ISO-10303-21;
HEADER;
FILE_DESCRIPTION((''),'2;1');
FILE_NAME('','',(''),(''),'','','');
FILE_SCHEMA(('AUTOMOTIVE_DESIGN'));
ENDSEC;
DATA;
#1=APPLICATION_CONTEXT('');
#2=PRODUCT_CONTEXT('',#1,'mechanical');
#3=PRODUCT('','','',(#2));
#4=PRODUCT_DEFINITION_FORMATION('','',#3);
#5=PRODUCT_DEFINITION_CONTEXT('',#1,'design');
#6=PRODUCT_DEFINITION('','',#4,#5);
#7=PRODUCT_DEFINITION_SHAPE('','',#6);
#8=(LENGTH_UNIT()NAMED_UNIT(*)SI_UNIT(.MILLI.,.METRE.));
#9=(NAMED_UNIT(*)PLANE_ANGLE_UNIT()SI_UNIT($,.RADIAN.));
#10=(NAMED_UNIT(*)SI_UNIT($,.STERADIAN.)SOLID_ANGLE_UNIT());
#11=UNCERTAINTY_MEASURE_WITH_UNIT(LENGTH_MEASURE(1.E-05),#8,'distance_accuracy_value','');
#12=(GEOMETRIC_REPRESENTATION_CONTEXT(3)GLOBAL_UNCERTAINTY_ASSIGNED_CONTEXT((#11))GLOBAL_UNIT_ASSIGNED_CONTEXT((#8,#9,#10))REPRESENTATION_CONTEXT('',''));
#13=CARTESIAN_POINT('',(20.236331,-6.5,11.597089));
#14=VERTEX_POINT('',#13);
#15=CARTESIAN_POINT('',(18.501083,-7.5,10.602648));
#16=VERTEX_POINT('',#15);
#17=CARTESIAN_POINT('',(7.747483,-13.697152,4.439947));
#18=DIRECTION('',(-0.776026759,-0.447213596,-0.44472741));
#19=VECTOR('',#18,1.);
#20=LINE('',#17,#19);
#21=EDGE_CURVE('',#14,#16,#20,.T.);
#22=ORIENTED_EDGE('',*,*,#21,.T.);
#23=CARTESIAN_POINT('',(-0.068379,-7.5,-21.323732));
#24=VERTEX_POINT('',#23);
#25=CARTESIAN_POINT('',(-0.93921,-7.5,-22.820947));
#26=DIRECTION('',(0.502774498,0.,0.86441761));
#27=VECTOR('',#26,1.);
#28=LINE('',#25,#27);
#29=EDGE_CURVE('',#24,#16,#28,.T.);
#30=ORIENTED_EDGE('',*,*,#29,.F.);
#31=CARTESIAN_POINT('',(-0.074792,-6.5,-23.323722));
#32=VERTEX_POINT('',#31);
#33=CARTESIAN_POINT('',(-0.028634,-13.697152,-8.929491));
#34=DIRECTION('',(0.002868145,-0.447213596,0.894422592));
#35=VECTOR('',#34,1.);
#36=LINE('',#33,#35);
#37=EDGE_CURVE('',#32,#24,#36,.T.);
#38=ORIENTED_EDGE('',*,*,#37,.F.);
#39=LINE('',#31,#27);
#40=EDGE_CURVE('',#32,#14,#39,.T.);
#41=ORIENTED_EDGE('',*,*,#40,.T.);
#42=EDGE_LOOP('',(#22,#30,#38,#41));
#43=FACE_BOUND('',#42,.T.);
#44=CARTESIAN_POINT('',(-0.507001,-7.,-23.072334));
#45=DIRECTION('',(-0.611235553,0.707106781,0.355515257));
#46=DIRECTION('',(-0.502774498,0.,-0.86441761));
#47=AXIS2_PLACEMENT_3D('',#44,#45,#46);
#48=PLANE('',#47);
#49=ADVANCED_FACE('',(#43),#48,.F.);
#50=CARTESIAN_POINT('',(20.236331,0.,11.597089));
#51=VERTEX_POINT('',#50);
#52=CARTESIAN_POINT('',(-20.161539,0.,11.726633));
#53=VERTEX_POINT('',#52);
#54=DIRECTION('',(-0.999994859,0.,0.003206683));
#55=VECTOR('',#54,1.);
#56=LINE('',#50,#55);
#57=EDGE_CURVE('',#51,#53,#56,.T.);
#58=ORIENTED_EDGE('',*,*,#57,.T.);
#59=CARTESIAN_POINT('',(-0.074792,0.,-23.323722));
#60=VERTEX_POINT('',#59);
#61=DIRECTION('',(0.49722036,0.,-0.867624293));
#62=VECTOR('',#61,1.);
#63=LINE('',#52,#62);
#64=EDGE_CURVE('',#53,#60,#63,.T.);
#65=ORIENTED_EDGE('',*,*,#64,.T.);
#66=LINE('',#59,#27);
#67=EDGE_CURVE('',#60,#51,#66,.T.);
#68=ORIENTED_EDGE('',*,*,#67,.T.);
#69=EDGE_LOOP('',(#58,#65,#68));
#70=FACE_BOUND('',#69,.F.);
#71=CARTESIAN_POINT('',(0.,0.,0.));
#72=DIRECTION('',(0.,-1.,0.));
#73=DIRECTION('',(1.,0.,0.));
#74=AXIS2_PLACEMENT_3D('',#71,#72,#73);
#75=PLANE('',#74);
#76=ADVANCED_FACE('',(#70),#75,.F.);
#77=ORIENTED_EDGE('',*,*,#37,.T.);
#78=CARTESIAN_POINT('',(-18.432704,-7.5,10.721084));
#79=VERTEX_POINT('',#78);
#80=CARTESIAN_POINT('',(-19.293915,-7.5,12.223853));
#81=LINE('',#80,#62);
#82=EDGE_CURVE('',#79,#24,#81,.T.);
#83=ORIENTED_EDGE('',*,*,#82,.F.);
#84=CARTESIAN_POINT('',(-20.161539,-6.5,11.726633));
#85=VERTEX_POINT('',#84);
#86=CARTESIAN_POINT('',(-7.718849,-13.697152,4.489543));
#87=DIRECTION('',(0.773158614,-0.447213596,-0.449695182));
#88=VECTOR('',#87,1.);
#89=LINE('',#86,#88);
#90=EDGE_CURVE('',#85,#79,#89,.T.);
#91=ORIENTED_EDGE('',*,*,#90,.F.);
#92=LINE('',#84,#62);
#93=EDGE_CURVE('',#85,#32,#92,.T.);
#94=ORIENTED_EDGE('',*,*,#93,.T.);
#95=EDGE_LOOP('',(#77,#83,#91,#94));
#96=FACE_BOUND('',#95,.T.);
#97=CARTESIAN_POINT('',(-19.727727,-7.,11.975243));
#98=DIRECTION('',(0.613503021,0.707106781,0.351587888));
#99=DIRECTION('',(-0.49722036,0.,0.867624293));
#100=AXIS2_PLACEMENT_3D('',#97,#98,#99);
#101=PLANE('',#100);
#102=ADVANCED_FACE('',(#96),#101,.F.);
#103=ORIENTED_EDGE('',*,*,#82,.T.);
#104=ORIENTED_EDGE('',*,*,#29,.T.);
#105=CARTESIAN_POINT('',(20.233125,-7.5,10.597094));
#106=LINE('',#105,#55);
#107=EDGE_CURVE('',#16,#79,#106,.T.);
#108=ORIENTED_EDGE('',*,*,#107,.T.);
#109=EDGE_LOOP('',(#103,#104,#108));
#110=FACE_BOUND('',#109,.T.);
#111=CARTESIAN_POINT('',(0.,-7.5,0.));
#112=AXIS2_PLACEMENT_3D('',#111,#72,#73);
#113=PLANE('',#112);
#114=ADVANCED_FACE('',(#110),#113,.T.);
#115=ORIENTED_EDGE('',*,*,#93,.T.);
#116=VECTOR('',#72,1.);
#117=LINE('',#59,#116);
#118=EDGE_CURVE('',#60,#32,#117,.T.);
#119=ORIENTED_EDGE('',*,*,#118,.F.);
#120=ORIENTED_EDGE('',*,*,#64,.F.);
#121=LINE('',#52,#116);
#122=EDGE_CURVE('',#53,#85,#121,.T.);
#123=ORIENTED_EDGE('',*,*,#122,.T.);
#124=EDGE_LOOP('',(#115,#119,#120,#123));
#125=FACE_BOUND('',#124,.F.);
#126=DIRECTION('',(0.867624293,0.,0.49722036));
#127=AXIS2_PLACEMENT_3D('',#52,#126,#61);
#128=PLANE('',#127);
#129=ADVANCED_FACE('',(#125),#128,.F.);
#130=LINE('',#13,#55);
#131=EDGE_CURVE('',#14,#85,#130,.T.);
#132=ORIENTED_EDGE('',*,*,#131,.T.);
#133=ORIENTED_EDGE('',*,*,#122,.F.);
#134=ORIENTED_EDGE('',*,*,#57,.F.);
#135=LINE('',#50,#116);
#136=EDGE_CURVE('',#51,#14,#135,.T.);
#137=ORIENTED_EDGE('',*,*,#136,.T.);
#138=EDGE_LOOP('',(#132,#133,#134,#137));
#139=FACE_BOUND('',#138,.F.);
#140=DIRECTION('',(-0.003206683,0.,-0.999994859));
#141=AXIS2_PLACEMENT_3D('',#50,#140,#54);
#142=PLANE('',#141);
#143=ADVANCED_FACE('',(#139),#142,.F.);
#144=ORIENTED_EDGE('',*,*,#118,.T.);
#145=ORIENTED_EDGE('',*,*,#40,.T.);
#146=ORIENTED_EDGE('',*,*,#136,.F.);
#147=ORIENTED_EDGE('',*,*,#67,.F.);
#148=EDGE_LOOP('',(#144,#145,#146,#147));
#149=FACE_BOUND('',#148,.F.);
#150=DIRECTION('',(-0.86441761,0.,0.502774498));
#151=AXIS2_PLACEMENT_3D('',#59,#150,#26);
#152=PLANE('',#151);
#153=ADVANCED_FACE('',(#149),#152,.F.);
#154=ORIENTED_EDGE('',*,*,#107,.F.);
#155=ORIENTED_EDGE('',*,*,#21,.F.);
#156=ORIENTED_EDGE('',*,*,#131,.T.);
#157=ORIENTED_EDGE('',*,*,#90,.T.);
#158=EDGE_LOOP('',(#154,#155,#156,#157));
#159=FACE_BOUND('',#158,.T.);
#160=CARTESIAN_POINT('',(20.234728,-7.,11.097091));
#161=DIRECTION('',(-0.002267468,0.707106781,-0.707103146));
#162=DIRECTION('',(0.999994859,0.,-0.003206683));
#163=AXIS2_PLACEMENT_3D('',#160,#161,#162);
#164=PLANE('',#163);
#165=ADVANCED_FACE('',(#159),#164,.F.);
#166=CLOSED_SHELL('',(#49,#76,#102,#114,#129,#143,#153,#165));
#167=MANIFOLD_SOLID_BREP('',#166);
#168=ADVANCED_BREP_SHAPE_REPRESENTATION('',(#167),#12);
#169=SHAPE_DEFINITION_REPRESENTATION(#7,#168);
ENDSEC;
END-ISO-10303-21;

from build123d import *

# Parameters (mm, degrees)
F1_DEPTH = 15
F2_SIZE  = 2
F3_SCALE = 0.5


with BuildPart() as f1:
    # F0 (on Front) → F1 (new body)
    with BuildSketch(Plane.XZ):
        Polygon((-0.1495843466, -46.6474431687), (40.472662979, 23.1941777401), (-40.3230786324, 23.4532654285), align=None)
    extrude(amount=F1_DEPTH)

    # F2
    f2_edges = [f1.edges().sort_by_distance(p)[0] for p in [
        (0.074792, -15, 23.323722),
        (20.161539, -15, -11.726633),
        (-20.236331, -15, -11.597089),
    ]]
    chamfer(f2_edges, length=F2_SIZE)


with BuildPart() as f1_1:
    # F3: moved
    add(f1.part.scale(F3_SCALE))


solid = f1_1.part
